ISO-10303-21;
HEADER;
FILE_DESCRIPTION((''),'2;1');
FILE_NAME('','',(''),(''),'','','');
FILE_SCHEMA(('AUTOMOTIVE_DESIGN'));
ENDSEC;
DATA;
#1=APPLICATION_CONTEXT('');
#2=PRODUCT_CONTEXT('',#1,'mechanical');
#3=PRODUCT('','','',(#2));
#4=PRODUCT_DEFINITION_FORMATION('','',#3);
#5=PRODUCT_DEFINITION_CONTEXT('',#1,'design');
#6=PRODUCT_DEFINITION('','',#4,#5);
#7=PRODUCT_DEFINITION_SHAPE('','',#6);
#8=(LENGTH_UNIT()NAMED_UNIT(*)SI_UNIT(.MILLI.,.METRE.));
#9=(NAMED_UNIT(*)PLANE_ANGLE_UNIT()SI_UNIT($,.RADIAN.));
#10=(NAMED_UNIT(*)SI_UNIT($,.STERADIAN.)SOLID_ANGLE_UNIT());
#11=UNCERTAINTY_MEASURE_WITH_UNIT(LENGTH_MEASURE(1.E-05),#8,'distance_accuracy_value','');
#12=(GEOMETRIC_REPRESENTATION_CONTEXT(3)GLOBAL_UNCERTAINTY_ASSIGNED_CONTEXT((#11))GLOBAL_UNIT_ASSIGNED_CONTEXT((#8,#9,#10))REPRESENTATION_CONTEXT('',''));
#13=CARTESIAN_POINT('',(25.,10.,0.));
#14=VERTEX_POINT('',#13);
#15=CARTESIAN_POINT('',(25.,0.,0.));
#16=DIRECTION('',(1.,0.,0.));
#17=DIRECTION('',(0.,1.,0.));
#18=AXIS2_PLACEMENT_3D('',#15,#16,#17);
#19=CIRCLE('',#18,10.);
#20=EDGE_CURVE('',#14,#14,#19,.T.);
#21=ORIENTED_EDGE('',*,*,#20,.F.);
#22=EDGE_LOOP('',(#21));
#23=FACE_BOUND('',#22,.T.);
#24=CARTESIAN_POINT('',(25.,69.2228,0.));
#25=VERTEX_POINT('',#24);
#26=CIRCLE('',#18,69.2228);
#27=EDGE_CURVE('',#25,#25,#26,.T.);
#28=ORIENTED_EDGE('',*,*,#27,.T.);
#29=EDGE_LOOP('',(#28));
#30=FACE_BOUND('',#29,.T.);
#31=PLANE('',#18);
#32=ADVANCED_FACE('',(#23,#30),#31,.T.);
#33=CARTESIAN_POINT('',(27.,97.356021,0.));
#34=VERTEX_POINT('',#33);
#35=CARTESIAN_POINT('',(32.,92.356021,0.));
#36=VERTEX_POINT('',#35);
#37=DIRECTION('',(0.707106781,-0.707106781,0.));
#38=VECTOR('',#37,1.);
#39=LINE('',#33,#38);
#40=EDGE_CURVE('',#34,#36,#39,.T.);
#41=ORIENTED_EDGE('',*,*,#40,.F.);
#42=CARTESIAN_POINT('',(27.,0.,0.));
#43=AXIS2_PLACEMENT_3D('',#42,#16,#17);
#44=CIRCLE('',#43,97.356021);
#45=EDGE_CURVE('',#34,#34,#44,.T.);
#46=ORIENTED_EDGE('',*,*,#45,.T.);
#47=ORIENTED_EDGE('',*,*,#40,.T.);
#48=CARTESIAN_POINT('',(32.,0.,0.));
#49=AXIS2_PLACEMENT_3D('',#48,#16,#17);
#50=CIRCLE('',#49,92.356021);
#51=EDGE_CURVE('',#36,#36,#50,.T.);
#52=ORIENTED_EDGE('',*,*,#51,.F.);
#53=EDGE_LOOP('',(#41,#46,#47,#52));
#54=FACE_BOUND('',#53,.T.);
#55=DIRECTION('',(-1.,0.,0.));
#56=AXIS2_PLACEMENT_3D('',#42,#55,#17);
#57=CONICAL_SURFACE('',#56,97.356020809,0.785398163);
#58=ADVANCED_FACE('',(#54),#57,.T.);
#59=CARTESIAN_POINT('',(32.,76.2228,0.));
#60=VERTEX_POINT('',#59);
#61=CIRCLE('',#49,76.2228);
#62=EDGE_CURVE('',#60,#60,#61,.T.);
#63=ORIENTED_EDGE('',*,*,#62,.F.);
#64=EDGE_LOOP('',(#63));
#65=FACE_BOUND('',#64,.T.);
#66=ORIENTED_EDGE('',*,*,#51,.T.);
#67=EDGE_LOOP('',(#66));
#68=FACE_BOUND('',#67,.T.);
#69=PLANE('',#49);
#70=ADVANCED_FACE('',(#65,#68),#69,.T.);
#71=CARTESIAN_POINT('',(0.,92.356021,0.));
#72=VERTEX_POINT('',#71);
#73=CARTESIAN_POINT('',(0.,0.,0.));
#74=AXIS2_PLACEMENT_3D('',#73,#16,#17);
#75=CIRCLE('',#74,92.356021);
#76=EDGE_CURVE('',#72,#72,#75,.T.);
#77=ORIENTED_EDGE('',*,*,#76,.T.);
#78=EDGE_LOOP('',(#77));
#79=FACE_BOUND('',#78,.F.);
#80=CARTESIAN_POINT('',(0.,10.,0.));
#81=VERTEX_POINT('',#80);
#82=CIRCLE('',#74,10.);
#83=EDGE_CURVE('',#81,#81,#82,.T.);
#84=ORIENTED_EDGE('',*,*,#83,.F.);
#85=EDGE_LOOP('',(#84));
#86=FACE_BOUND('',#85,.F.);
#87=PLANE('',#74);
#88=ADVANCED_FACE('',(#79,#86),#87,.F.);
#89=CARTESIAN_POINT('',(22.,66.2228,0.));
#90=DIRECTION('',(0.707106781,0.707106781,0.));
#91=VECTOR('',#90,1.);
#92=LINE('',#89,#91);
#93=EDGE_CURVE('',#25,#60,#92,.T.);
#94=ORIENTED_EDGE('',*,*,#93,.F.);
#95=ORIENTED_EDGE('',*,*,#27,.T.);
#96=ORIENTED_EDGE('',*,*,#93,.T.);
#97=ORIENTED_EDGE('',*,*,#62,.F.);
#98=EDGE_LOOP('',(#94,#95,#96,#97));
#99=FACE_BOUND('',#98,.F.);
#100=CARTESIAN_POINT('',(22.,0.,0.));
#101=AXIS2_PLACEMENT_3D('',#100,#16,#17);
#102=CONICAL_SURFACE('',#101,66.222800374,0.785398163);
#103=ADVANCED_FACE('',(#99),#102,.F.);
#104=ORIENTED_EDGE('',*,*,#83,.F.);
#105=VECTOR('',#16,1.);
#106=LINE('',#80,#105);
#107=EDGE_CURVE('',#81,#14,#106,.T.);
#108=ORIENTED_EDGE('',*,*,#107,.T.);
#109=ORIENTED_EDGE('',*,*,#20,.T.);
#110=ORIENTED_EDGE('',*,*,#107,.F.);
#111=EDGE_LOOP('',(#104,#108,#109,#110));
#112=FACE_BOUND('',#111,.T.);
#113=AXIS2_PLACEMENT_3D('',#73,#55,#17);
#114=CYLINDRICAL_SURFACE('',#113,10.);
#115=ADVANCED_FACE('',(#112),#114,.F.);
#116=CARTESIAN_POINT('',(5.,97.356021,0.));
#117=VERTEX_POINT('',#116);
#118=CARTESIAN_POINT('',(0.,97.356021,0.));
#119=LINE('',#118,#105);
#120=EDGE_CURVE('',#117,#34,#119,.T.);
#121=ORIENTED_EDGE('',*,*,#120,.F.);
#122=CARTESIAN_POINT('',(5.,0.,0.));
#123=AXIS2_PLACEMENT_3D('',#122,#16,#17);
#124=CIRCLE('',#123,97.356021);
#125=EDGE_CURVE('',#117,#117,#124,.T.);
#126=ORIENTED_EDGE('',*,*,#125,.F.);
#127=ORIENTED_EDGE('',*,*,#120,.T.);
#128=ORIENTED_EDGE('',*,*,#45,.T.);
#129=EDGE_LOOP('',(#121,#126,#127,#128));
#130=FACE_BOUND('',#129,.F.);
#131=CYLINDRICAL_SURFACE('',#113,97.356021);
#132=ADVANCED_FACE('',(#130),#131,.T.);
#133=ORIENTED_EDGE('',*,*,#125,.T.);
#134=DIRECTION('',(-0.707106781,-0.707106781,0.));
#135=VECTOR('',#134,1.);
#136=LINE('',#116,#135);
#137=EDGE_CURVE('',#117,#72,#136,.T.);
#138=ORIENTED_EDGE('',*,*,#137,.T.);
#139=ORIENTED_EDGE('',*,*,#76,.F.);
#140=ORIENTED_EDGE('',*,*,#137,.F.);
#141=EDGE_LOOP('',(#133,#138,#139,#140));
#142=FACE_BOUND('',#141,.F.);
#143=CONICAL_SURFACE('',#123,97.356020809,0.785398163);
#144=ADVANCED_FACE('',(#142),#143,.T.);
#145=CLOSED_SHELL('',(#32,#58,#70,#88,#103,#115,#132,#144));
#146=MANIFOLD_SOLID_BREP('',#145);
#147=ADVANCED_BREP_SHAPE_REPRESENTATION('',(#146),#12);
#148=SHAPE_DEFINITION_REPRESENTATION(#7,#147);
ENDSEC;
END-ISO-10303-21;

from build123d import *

# Parameters (mm, degrees)
F0_R     = 66.2228003741
F0_R_2   = 10
F1_DEPTH = 25
F0_R_3   = 97.356020809
F0_R_4   = 74.349079459
F2_DEPTH = 32
F4_SIZE  = 5
F5_SIZE  = 5


# Not quite as in the source:
# - a fillet or chamfer that OpenCascade refuses, or shapes differently, is made with other operations: its cross-section is extruded or revolved along the edge and cut away or added


with BuildPart() as f1:
    # F0 (on Right) → F1 (new body)
    with BuildSketch(Plane.YZ):
        Circle(F0_R)
        Circle(F0_R_2, mode=Mode.SUBTRACT)
    extrude(amount=F1_DEPTH)

    # F0 (on Right) → F2 (join)
    with BuildSketch(Plane.YZ):
        Circle(F0_R_3)
        Circle(F0_R_4, mode=Mode.SUBTRACT)
        Circle(F0_R_4)
        Circle(F0_R, mode=Mode.SUBTRACT)
    extrude(amount=F2_DEPTH)

    # F3: chamfer of 10 on 1 edges, made by hand


with BuildPart() as f3_tool2:
    # F3_s3 → F3_t4 (revolve)
    with BuildSketch(Plane.XY):
        Polygon((22, 66.2228003741), (32, 76.2228003741), (32, 66.2228003741), align=None)
    revolve(axis=Axis((32, 0, 0), (1, 0, 0)))

    split(bisect_by=Plane.YZ.offset(25), keep=Keep.TOP)


with BuildPart() as f1_1:
    add(f1.part)

    # F3_t1: cut F3_tool2
    add(f3_tool2.part, mode=Mode.SUBTRACT)

    # F4
    f4_edges = [f1_1.edges().sort_by_distance(p)[0] for p in [
        (32, -97.356021, 0),
    ]]
    chamfer(f4_edges, length=F4_SIZE)

    # F5
    f5_edges = [f1_1.edges().sort_by_distance(p)[0] for p in [
        (0, -97.356021, 0),
    ]]
    chamfer(f5_edges, length=F5_SIZE)


solid = f1_1.part
